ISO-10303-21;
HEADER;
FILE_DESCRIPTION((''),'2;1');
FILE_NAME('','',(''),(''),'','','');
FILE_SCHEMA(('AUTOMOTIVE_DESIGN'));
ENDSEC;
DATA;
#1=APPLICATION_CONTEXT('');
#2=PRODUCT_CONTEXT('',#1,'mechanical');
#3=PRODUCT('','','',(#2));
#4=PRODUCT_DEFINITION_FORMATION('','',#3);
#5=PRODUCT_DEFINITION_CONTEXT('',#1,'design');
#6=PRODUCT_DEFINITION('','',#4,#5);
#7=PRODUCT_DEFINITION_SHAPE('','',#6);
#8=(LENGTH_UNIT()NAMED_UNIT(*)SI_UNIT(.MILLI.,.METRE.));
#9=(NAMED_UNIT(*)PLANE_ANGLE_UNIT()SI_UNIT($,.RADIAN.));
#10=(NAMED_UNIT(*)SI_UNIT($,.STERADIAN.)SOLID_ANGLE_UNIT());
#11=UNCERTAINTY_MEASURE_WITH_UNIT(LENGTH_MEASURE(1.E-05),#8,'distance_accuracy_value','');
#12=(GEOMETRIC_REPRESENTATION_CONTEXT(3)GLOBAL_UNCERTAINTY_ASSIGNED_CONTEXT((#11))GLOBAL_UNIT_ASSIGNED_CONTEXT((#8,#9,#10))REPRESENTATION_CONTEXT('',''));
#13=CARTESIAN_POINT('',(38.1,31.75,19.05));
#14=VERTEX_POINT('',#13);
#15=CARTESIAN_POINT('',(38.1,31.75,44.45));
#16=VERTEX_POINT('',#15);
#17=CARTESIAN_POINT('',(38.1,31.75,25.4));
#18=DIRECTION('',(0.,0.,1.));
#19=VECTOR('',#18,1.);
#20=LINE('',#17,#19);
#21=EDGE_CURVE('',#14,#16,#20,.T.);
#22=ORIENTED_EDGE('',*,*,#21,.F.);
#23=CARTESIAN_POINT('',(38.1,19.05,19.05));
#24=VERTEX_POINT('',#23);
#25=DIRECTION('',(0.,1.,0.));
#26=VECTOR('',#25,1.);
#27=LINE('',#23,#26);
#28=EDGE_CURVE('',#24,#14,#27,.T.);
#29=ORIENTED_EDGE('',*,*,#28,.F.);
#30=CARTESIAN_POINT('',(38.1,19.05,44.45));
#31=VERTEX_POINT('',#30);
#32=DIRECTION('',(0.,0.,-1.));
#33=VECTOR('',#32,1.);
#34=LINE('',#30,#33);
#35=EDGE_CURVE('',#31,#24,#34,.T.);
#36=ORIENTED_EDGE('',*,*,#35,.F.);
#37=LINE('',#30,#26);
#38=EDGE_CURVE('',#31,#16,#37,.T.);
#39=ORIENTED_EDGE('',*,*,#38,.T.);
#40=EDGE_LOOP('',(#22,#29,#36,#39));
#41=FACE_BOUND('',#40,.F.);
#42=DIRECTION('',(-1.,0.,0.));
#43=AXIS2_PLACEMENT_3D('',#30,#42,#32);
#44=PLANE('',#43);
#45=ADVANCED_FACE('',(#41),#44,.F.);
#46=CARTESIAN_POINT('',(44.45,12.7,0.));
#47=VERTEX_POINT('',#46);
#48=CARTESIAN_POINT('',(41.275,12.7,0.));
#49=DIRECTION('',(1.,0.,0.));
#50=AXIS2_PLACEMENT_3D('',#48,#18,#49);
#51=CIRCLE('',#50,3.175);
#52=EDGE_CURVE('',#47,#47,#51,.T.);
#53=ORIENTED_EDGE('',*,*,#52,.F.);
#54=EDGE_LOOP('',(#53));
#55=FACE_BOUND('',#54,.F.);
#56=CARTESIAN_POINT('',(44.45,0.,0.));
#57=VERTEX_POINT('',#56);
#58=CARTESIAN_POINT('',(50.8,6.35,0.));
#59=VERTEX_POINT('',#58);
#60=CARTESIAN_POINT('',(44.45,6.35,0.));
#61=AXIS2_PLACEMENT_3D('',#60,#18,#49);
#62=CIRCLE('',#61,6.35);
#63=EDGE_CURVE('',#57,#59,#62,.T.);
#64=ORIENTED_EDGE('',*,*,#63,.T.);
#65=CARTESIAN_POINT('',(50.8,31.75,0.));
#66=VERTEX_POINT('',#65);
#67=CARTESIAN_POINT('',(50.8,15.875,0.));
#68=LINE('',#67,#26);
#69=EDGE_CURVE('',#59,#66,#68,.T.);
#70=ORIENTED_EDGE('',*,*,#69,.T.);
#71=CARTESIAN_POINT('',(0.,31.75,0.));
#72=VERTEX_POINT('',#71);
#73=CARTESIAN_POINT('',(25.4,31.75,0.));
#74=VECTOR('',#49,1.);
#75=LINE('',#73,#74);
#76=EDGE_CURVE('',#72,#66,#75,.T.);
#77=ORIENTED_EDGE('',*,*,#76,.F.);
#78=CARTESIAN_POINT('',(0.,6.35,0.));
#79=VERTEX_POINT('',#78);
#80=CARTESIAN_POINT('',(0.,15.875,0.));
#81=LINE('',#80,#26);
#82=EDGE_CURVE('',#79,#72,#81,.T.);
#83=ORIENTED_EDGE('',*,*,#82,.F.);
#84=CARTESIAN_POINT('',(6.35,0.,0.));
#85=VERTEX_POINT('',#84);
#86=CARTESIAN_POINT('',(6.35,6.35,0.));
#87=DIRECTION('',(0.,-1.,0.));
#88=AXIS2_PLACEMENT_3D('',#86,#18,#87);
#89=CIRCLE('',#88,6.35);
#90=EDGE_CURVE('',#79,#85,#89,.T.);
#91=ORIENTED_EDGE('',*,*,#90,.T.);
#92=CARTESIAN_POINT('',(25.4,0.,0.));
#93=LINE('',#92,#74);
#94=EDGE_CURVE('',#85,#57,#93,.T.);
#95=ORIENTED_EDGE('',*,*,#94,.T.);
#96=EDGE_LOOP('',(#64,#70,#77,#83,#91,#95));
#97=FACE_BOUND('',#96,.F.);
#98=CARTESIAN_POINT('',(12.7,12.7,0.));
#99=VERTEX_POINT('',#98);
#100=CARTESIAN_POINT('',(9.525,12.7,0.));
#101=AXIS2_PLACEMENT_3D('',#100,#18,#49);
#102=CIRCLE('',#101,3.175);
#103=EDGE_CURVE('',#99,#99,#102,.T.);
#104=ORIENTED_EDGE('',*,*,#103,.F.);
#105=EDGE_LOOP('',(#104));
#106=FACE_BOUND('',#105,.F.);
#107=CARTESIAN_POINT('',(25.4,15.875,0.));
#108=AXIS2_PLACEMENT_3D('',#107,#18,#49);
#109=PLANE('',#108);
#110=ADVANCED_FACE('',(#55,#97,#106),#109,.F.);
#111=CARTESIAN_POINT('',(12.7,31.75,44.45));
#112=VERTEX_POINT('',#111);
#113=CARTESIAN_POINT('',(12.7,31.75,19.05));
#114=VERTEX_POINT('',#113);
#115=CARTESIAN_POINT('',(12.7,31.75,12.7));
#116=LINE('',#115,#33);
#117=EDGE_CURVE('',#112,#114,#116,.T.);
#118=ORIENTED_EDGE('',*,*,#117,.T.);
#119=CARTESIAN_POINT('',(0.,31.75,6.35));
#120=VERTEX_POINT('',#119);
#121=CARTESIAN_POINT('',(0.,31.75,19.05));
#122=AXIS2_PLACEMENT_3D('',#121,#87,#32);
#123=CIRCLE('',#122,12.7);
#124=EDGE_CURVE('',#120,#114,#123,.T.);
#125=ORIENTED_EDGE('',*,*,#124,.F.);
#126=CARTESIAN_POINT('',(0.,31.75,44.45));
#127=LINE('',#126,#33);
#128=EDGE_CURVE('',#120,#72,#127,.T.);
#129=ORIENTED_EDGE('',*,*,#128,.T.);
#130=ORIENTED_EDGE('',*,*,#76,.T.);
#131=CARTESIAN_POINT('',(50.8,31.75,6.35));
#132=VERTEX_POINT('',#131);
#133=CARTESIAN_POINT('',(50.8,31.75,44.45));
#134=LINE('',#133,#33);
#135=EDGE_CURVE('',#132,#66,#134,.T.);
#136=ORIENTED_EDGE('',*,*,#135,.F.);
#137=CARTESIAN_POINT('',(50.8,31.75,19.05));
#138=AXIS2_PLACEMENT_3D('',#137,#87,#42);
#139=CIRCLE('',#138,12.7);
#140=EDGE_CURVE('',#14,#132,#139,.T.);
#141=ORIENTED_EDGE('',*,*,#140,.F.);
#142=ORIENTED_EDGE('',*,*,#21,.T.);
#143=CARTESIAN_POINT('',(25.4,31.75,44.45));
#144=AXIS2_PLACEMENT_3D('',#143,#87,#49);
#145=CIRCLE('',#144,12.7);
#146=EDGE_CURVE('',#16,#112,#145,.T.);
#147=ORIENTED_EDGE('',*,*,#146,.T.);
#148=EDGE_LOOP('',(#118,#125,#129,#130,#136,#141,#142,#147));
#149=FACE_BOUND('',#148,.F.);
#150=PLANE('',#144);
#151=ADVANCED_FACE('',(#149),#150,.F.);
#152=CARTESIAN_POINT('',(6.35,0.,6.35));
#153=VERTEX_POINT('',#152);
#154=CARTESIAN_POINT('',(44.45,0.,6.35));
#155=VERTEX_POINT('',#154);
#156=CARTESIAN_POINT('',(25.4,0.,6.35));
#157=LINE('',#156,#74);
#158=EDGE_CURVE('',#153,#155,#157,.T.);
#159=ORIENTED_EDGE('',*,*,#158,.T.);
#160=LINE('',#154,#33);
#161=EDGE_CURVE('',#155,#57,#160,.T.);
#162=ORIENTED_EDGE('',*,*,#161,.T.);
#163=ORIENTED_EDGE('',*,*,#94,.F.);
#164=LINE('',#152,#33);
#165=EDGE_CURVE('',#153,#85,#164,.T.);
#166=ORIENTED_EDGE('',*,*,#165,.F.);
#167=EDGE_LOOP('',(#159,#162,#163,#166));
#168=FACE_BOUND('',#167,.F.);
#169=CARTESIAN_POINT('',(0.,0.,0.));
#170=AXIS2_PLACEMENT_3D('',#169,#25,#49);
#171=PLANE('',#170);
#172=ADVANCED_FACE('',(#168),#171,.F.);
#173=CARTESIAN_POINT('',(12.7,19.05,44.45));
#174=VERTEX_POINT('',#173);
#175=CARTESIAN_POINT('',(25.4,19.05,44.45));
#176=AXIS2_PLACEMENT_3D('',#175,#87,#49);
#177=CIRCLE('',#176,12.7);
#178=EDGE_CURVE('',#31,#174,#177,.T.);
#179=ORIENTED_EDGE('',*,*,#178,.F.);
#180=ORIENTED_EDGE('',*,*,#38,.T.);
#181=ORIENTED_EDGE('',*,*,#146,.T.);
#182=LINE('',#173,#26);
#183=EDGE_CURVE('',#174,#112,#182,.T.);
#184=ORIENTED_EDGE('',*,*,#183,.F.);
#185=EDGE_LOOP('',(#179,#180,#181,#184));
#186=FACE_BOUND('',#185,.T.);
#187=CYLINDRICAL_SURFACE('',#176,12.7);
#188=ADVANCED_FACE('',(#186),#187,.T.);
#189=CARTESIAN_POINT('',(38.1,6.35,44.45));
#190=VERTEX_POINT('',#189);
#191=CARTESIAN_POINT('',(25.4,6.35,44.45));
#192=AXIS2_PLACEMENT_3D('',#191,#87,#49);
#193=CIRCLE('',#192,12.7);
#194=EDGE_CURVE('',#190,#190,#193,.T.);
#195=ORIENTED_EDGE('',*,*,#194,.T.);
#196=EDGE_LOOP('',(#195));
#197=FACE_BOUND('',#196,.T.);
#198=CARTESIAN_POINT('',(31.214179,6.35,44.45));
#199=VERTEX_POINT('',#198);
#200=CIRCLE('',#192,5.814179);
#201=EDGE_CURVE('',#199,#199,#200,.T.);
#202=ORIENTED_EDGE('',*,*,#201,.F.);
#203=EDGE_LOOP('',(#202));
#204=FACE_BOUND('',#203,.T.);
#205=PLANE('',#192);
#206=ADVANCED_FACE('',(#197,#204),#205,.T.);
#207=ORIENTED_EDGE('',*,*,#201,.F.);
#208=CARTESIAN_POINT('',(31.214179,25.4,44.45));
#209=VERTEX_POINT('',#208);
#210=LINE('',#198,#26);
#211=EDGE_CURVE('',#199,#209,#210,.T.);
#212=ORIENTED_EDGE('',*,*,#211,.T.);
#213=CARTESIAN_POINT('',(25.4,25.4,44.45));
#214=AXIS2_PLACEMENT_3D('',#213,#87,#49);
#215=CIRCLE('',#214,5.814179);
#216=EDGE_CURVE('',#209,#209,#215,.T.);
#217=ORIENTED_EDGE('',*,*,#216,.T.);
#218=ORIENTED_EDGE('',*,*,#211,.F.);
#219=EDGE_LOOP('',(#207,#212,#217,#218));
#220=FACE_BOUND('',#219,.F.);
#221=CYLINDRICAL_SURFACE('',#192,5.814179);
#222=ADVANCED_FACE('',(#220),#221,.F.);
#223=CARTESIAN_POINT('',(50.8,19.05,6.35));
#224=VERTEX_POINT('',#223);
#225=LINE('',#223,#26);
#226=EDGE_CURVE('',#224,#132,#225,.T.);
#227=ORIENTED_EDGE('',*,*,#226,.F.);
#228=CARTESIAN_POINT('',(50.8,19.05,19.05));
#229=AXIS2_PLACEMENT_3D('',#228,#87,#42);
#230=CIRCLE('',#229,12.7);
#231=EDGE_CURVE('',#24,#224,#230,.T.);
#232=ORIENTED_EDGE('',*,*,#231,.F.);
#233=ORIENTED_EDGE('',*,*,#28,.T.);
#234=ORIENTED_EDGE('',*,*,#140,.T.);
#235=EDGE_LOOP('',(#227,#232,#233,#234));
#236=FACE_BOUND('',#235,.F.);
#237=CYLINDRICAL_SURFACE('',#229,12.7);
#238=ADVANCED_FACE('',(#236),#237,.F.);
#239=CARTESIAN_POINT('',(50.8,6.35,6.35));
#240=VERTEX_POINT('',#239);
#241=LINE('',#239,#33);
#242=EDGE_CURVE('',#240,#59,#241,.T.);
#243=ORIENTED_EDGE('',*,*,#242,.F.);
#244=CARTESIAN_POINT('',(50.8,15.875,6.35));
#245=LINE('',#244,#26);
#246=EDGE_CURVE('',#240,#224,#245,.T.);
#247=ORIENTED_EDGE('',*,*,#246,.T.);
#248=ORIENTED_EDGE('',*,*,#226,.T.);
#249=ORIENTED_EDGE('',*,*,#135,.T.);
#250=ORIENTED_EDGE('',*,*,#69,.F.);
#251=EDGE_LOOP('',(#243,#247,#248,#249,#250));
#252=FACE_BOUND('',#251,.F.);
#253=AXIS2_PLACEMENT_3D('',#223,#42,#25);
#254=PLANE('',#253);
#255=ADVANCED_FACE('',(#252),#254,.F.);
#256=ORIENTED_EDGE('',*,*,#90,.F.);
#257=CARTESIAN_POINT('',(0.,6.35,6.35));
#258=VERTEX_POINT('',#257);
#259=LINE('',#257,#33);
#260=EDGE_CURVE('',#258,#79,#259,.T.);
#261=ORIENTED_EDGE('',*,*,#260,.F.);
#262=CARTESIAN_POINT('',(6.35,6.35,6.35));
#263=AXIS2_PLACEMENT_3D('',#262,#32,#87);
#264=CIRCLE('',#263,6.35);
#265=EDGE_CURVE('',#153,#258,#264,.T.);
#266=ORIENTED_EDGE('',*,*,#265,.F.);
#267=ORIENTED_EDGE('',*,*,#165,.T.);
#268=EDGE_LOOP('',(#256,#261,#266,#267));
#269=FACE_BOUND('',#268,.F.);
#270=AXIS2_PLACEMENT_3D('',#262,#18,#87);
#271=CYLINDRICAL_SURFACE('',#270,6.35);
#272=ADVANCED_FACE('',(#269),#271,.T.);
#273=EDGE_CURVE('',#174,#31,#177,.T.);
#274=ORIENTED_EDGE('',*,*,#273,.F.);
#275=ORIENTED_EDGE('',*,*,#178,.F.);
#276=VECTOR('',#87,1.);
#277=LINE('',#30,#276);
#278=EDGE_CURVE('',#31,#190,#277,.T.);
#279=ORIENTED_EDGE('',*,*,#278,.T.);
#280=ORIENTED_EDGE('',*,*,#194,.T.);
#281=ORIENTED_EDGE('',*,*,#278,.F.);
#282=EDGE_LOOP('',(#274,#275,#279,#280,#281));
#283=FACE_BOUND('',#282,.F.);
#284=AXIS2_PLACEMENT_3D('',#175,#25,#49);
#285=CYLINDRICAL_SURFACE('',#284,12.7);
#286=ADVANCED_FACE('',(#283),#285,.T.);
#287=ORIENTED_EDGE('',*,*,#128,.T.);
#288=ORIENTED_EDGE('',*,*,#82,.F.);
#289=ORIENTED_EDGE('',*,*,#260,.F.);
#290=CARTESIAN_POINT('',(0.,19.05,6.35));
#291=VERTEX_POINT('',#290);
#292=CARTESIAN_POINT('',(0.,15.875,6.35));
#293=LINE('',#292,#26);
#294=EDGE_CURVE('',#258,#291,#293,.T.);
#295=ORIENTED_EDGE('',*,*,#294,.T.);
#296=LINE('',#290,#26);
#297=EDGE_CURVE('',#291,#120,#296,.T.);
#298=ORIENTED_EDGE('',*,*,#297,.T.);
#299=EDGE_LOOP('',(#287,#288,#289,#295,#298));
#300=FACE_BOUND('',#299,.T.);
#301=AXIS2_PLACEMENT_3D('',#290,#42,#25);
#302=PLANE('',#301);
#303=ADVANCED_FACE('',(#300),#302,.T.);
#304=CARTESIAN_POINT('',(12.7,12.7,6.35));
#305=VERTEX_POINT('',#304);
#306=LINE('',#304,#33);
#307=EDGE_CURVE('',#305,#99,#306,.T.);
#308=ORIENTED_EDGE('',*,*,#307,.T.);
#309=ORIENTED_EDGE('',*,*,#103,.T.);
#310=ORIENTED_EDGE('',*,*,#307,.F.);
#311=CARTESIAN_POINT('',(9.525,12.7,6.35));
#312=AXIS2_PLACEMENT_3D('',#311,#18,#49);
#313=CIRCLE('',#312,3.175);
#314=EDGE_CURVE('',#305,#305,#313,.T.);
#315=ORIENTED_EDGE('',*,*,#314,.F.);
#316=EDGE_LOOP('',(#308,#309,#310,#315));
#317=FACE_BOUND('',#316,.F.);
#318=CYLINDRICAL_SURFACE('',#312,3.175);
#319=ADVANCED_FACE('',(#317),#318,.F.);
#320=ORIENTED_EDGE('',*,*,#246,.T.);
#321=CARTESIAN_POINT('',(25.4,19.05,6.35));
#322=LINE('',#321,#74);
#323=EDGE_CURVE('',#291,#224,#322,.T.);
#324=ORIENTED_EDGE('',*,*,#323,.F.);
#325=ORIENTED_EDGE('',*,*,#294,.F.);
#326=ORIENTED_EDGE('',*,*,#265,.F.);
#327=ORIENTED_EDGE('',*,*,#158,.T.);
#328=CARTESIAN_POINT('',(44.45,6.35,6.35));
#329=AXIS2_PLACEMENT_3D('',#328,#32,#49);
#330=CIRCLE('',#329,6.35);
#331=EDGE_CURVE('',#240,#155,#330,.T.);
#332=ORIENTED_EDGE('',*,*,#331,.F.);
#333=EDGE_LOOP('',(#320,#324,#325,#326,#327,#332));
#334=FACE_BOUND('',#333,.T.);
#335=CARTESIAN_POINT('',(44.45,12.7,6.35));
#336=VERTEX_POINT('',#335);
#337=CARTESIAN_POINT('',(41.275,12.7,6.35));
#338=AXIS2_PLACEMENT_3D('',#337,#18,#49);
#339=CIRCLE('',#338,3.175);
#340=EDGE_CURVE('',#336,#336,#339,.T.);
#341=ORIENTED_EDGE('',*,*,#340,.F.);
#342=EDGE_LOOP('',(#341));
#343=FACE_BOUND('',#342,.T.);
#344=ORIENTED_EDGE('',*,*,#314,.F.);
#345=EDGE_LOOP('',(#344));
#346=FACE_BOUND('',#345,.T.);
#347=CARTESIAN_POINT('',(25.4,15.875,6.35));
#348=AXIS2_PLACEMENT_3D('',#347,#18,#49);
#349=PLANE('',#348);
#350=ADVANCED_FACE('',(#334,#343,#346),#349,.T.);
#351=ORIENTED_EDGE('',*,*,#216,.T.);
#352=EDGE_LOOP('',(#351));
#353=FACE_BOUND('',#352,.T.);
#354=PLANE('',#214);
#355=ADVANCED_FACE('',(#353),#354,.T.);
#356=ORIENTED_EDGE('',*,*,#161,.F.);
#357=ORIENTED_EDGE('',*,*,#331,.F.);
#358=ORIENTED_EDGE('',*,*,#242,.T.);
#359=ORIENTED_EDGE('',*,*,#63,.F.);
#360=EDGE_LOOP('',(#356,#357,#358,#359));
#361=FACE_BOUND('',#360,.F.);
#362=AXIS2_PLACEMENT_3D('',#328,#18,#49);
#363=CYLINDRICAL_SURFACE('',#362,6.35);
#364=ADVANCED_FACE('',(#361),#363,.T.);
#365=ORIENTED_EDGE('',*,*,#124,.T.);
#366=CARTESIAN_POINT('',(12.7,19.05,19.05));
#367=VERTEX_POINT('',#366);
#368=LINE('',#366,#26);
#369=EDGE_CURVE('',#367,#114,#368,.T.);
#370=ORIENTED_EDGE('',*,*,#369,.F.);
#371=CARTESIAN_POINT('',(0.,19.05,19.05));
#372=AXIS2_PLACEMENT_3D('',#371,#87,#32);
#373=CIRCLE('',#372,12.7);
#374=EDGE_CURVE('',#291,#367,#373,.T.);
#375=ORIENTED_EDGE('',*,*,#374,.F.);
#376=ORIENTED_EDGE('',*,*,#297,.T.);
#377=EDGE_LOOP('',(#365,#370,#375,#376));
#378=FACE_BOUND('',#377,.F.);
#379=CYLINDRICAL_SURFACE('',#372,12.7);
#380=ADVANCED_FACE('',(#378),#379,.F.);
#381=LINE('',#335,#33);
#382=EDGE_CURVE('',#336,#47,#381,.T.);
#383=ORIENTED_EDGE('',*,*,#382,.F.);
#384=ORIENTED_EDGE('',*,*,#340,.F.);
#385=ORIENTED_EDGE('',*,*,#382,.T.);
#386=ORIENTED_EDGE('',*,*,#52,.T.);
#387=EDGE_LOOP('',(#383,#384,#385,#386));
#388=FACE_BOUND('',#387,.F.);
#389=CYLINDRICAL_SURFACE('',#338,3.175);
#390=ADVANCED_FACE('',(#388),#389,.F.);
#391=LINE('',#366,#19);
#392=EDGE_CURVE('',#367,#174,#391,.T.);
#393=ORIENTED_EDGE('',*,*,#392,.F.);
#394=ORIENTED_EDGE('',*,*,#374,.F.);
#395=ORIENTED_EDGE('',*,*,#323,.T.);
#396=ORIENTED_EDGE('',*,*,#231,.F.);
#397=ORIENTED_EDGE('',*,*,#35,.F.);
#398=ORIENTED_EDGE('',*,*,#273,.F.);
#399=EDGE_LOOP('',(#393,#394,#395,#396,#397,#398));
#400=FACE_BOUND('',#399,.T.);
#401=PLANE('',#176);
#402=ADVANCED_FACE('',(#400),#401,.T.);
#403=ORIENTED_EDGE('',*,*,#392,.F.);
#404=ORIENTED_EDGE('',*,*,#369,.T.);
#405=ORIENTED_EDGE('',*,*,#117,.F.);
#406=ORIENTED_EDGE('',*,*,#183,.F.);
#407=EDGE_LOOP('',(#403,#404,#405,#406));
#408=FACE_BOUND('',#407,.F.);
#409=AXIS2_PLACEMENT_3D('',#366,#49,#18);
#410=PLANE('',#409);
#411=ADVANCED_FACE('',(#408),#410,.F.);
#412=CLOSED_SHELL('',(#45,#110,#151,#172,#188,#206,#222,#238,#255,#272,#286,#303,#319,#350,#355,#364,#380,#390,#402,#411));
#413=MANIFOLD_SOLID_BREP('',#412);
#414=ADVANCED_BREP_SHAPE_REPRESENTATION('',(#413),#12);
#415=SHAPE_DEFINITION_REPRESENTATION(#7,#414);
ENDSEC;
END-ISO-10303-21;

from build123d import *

# Parameters (mm, degrees)
F0_W      = 50.8
F0_H      = 31.75
F1_DEPTH  = 6.35
F3_DEPTH  = 25.4
F4_W      = 50.8
F4_H      = 12.7
F5_DEPTH  = 38.1
F6_R      = 3.175
F7_DEPTH  = 25.4
F9_DEPTH  = 25.4
F10_DEPTH = 25.4
F12_DEPTH = 12.7
F14_DEPTH = 12.7
F15_R     = 5.8141785566
F16_DEPTH = 19.05


# Not quite as in the source:
# - a feature names something its author has since deleted; it is built from what else it names


with BuildPart() as f1:
    # F0 (on Top) → F1 (new body)
    with BuildSketch(Plane.XY):
        with Locations((25.4, 15.875)):
            Rectangle(F0_W, F0_H)
    extrude(amount=F1_DEPTH)

    # F2 (on face) → F3 (cut)
    with BuildSketch(Plane.XY.offset(6.35)):
        with BuildLine():
            ThreePointArc((6.35, 0), (1.8598719395, 1.8598719395), (0, 6.35))
            Line((0, 6.35), (0, 0))
            Line((0, 0), (6.35, 0))
        make_face()
        with BuildLine():
            ThreePointArc((50.8, 6.35), (48.9401280605, 1.8598719395), (44.45, 0))
            Line((44.45, 0), (50.8, 0))
            Line((50.8, 0), (50.8, 6.35))
        make_face()
    extrude(amount=-F3_DEPTH, mode=Mode.SUBTRACT)

    # F4 (on face) → F5 (join)
    with BuildSketch(Plane.XY.offset(6.35)):
        with Locations((25.4, 25.4)):
            Rectangle(F4_W, F4_H)
    extrude(amount=F5_DEPTH)

    # F6 (on face) → F7 (cut)
    with BuildSketch(Plane.XY.offset(6.35)):
        with Locations((9.525, 12.7)):
            Circle(F6_R)
        with Locations((41.275, 12.7)):
            Circle(F6_R)
    extrude(amount=-F7_DEPTH, mode=Mode.SUBTRACT)

    # F8 (on face) → F9 (cut)
    with BuildSketch(Plane.XZ.offset(-19.05)):
        with BuildLine():
            Line((12.7, 19.05), (12.7, 44.45))
            Line((12.7, 44.45), (0, 44.45))
            Line((0, 44.45), (0, 6.35))
            ThreePointArc((0, 6.35), (8.9802561211, 10.0697438789), (12.7, 19.05))
        make_face()
        with BuildLine():
            Line((50.8, 44.45), (38.1, 44.45))
            Line((38.1, 44.45), (38.1, 19.05))
            ThreePointArc((38.1, 19.05), (41.8197438789, 10.0697438789), (50.8, 6.35))
            Line((50.8, 6.35), (50.8, 44.45))
        make_face()
    extrude(amount=-F9_DEPTH, mode=Mode.SUBTRACT)

    # F8 (on face) → F10 (cut)
    with BuildSketch(Plane.XZ.offset(-19.05)):
        with BuildLine():
            Line((12.7, 19.05), (12.7, 44.45))
            Line((12.7, 44.45), (0, 44.45))
            Line((0, 44.45), (0, 6.35))
            ThreePointArc((0, 6.35), (8.9802561211, 10.0697438789), (12.7, 19.05))
        make_face()
        with BuildLine():
            Line((38.1, 44.45), (12.7, 44.45))
            ThreePointArc((12.7, 44.45), (25.4, 31.75), (38.1, 44.45))
        make_face()
        with BuildLine():
            Line((50.8, 44.45), (38.1, 44.45))
            Line((38.1, 44.45), (38.1, 19.05))
            ThreePointArc((38.1, 19.05), (41.8197438789, 10.0697438789), (50.8, 6.35))
            Line((50.8, 6.35), (50.8, 44.45))
        make_face()
    extrude(amount=-F10_DEPTH, mode=Mode.SUBTRACT)

    # F11 (on face) → F12 (join)
    with BuildSketch(Plane.XZ.offset(-19.05)):
        with BuildLine():
            ThreePointArc((12.7, 44.45), (25.4, 31.75), (38.1, 44.45))
            ThreePointArc((38.1, 44.45), (25.4, 57.15), (12.7, 44.45))
        make_face()
    extrude(amount=-F12_DEPTH)

    # F13 (on face) → F14 (join)
    with BuildSketch(Plane.XZ.offset(-19.05)):
        with BuildLine():
            ThreePointArc((12.7, 44.45), (25.4, 31.75), (38.1, 44.45))
            ThreePointArc((38.1, 44.45), (25.4, 57.15), (12.7, 44.45))
        make_face()
    extrude(amount=F14_DEPTH)

    # F15 (on face) → F16 (cut)
    with BuildSketch(Plane.XZ.offset(-6.35)):
        with Locations((25.4, 44.45)):
            Circle(F15_R)
    extrude(amount=-F16_DEPTH, mode=Mode.SUBTRACT)


solid = f1.part
